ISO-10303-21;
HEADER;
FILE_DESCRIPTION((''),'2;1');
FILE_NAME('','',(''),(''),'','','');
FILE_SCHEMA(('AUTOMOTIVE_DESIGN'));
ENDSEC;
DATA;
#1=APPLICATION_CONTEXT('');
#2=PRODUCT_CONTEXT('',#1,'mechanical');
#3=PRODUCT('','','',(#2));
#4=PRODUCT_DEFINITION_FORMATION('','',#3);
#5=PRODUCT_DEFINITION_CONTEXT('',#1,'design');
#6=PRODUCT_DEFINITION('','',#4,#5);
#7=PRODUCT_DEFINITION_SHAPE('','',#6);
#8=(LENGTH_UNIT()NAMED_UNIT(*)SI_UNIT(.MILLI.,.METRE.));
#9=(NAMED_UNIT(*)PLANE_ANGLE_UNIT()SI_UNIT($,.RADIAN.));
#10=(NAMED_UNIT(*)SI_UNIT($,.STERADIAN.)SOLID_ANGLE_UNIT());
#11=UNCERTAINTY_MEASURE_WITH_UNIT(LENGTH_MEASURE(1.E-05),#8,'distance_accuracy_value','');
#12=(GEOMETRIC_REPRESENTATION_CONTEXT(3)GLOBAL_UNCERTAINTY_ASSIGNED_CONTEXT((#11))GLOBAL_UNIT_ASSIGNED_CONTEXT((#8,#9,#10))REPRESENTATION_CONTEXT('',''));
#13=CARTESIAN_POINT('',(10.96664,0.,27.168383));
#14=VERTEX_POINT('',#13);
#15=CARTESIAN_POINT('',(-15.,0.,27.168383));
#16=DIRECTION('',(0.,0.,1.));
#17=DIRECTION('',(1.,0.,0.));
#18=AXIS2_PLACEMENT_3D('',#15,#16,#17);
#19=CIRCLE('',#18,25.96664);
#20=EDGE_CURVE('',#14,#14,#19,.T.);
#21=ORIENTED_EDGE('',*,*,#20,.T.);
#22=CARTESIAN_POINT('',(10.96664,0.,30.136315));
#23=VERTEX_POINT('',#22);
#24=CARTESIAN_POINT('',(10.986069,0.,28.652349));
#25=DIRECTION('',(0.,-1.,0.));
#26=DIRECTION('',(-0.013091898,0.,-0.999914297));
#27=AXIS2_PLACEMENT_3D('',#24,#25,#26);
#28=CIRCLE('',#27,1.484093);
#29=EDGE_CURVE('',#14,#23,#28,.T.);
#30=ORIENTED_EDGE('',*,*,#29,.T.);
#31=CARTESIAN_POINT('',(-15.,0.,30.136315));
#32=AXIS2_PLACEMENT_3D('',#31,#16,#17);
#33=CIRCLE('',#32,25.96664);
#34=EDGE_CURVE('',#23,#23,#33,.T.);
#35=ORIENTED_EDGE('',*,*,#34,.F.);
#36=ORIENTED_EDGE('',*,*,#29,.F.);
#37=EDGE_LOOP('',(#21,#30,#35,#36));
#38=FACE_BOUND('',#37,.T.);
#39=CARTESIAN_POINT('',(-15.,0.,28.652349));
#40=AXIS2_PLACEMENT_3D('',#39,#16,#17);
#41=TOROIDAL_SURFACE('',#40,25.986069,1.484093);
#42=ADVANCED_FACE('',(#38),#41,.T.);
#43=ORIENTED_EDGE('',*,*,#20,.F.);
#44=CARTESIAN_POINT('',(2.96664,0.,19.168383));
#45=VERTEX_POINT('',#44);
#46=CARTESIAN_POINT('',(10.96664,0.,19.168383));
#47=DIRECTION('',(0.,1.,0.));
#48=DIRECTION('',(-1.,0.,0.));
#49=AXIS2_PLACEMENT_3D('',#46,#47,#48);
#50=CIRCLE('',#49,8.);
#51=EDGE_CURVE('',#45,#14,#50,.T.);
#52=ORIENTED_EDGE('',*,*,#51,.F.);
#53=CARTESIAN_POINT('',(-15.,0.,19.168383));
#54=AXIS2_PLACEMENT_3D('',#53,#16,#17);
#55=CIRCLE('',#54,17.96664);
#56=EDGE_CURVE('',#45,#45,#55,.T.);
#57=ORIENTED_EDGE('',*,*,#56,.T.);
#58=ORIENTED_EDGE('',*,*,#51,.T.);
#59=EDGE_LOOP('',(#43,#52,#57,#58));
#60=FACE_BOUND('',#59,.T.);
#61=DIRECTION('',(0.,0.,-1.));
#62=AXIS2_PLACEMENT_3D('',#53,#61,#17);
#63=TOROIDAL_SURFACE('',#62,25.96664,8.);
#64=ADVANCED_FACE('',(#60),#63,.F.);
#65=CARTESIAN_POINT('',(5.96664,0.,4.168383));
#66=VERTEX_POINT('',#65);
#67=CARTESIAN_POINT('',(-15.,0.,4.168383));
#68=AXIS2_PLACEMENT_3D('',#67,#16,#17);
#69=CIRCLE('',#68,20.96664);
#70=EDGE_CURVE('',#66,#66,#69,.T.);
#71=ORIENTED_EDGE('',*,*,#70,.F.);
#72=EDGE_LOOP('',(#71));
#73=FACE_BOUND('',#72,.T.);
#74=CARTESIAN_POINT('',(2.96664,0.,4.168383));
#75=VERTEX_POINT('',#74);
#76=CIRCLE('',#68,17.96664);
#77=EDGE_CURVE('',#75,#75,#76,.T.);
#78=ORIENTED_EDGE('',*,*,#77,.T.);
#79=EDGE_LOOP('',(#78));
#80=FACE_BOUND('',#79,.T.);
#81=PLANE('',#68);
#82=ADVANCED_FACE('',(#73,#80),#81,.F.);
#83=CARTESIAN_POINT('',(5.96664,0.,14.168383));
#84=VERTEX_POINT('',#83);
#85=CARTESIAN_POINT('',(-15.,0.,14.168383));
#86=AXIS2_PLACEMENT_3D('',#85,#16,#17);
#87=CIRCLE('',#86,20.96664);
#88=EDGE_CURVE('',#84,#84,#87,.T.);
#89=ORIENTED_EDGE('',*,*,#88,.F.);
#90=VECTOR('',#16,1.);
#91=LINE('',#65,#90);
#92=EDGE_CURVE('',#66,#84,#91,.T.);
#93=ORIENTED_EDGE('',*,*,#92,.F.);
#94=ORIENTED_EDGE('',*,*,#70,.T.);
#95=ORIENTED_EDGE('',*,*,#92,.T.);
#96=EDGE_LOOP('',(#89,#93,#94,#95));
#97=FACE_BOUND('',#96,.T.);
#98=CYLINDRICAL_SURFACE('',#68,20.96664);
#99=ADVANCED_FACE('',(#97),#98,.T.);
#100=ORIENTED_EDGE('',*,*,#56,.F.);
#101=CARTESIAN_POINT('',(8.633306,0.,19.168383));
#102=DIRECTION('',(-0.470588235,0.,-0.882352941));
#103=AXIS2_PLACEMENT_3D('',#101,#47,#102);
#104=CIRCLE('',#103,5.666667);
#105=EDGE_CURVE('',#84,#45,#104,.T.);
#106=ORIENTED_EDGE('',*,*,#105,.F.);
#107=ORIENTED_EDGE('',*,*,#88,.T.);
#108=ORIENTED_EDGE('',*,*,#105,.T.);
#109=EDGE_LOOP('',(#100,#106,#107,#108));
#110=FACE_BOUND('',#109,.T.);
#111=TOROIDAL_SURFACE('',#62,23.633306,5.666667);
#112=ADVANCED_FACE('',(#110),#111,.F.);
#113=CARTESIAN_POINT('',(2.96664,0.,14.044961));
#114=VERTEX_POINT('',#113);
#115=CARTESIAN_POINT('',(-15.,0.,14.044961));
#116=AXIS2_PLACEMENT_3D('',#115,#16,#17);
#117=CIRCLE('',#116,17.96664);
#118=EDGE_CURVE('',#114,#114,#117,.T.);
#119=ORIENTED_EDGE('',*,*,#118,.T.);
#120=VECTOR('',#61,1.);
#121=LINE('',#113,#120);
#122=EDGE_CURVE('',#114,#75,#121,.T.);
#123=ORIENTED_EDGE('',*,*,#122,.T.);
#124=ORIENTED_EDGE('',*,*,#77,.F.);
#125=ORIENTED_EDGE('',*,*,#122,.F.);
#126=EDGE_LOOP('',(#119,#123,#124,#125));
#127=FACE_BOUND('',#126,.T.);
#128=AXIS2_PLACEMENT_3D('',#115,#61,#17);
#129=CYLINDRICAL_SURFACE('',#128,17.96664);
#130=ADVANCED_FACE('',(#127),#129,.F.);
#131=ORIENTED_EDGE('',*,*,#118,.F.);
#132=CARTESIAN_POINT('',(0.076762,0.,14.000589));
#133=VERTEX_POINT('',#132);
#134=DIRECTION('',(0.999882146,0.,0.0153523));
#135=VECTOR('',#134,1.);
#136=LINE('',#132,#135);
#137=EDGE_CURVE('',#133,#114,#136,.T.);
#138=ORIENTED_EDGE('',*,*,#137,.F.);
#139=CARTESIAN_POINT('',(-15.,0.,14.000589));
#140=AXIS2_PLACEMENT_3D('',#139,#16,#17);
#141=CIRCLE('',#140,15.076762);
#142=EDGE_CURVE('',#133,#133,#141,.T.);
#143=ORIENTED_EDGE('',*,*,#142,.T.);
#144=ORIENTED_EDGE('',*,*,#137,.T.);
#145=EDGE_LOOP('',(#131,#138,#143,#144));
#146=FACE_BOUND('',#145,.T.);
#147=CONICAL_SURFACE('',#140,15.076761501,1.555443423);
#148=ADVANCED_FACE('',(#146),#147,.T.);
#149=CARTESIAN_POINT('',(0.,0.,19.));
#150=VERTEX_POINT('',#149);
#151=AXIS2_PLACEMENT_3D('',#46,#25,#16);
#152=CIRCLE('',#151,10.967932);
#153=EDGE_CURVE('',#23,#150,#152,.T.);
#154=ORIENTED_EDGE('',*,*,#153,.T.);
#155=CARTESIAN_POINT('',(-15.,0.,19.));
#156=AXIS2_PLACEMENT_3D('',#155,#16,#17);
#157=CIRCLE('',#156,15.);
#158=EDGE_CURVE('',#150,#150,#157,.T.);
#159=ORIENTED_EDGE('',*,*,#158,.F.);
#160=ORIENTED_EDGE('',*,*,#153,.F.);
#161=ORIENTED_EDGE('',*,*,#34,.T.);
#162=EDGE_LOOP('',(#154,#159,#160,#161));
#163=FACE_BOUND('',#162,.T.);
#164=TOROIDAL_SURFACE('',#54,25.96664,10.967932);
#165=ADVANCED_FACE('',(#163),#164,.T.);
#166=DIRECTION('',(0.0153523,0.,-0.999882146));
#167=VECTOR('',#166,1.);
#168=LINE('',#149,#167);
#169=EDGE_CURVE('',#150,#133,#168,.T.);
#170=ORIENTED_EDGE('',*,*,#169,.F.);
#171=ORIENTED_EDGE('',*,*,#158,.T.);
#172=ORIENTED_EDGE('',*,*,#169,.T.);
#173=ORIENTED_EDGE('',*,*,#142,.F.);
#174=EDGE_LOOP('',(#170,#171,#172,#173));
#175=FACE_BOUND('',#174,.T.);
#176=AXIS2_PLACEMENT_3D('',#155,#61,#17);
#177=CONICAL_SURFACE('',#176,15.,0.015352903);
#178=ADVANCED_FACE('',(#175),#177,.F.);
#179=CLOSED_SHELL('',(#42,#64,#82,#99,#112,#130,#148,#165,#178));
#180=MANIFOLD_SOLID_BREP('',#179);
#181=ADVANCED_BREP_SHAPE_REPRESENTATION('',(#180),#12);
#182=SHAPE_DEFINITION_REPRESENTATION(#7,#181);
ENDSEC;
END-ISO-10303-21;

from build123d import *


# Not quite as in the source:
# - a feature of the source that left no trace in its solid (it failed there, or was rolled back) is left out
# - a feature names something its author has since deleted; it is built from what else it names


with BuildPart() as f1:
    # F0 (on Front) → F1 (revolve)
    with BuildSketch(Plane.XZ):
        with BuildLine():
            ThreePointArc((10.9666396311, 27.1683829889), (12.4701625396, 28.6523491091), (10.9666396311, 30.1363152292))
            ThreePointArc((10.9666396311, 30.1363152292), (3.1518347441, 26.8641196143), (0, 19))
            Line((0, 19), (0.0767615013, 14.0005892675))
            Line((0.0767615013, 14.0005892675), (2.9666396311, 14.0449607736))
            Line((2.9666396311, 14.0449607736), (2.9666396311, 4.1683829889))
            Line((2.9666396311, 4.1683829889), (5.9666396311, 4.1683829889))
            Line((5.9666396311, 4.1683829889), (5.9666396311, 14.1683829889))
            ThreePointArc((5.9666396311, 14.1683829889), (3.7741797187, 16.2529070415), (2.9666396311, 19.1683829889))
            ThreePointArc((2.9666396311, 19.1683829889), (5.3097853816, 24.8252372384), (10.9666396311, 27.1683829889))
        make_face()
    revolve(axis=Axis((-15, 0, 28.4551028162), (0, 0, 1)))


solid = f1.part
